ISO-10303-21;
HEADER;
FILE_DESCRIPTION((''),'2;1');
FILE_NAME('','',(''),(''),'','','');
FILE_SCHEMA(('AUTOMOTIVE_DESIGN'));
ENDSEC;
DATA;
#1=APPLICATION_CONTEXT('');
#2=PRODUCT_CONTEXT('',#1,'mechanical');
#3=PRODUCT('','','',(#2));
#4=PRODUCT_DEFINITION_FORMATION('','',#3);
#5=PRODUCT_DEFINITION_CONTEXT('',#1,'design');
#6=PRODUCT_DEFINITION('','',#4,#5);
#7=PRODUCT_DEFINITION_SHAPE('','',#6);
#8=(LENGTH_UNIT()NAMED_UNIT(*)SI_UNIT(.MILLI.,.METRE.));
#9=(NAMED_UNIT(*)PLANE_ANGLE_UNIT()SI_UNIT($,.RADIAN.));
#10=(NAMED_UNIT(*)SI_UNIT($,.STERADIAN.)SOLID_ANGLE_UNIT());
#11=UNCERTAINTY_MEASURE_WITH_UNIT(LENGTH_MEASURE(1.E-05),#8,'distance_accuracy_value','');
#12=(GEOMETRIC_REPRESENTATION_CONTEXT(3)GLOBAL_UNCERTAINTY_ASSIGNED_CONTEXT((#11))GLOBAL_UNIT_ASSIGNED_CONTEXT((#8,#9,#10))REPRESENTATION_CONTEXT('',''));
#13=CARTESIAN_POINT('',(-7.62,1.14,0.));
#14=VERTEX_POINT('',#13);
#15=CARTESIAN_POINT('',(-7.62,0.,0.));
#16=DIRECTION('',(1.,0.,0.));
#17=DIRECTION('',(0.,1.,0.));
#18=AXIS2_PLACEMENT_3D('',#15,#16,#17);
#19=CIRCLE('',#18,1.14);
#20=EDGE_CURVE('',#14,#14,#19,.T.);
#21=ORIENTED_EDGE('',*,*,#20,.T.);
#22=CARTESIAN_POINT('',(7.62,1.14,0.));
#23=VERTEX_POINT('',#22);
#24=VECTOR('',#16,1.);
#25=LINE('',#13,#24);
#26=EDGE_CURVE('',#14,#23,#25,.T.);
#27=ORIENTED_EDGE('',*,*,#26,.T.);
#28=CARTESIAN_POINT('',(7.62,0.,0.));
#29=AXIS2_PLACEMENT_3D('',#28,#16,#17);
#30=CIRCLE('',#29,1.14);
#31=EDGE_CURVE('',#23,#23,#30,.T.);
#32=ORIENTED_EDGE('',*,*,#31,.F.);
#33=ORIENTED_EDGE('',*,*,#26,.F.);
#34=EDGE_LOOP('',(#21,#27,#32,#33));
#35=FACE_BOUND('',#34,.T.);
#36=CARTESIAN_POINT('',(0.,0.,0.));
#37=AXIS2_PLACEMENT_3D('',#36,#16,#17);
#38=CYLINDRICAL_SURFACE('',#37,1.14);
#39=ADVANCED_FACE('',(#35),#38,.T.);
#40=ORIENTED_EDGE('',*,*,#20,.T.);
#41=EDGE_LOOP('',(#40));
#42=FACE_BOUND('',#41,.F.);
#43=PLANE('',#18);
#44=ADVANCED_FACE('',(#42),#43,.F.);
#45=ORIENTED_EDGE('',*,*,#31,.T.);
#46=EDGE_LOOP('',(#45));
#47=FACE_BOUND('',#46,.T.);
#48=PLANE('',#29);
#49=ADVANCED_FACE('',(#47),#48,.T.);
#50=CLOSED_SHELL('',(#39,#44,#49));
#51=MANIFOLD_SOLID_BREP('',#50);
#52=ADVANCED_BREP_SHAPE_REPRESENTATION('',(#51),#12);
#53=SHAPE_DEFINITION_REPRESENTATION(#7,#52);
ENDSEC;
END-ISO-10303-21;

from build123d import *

# Parameters (mm, degrees)
F0_R     = 1.14
F1_DEPTH = 7.62


# Not quite as in the source:
# - the program builds the solid bodies; features that only make, move or delete a surface that nothing else refers to are left out


with BuildPart() as f1:
    # F0 (on Right) → F1 (new body, symmetric)
    with BuildSketch(Plane.YZ):
        Circle(F0_R)
    extrude(amount=F1_DEPTH, both=True)


solid = f1.part
